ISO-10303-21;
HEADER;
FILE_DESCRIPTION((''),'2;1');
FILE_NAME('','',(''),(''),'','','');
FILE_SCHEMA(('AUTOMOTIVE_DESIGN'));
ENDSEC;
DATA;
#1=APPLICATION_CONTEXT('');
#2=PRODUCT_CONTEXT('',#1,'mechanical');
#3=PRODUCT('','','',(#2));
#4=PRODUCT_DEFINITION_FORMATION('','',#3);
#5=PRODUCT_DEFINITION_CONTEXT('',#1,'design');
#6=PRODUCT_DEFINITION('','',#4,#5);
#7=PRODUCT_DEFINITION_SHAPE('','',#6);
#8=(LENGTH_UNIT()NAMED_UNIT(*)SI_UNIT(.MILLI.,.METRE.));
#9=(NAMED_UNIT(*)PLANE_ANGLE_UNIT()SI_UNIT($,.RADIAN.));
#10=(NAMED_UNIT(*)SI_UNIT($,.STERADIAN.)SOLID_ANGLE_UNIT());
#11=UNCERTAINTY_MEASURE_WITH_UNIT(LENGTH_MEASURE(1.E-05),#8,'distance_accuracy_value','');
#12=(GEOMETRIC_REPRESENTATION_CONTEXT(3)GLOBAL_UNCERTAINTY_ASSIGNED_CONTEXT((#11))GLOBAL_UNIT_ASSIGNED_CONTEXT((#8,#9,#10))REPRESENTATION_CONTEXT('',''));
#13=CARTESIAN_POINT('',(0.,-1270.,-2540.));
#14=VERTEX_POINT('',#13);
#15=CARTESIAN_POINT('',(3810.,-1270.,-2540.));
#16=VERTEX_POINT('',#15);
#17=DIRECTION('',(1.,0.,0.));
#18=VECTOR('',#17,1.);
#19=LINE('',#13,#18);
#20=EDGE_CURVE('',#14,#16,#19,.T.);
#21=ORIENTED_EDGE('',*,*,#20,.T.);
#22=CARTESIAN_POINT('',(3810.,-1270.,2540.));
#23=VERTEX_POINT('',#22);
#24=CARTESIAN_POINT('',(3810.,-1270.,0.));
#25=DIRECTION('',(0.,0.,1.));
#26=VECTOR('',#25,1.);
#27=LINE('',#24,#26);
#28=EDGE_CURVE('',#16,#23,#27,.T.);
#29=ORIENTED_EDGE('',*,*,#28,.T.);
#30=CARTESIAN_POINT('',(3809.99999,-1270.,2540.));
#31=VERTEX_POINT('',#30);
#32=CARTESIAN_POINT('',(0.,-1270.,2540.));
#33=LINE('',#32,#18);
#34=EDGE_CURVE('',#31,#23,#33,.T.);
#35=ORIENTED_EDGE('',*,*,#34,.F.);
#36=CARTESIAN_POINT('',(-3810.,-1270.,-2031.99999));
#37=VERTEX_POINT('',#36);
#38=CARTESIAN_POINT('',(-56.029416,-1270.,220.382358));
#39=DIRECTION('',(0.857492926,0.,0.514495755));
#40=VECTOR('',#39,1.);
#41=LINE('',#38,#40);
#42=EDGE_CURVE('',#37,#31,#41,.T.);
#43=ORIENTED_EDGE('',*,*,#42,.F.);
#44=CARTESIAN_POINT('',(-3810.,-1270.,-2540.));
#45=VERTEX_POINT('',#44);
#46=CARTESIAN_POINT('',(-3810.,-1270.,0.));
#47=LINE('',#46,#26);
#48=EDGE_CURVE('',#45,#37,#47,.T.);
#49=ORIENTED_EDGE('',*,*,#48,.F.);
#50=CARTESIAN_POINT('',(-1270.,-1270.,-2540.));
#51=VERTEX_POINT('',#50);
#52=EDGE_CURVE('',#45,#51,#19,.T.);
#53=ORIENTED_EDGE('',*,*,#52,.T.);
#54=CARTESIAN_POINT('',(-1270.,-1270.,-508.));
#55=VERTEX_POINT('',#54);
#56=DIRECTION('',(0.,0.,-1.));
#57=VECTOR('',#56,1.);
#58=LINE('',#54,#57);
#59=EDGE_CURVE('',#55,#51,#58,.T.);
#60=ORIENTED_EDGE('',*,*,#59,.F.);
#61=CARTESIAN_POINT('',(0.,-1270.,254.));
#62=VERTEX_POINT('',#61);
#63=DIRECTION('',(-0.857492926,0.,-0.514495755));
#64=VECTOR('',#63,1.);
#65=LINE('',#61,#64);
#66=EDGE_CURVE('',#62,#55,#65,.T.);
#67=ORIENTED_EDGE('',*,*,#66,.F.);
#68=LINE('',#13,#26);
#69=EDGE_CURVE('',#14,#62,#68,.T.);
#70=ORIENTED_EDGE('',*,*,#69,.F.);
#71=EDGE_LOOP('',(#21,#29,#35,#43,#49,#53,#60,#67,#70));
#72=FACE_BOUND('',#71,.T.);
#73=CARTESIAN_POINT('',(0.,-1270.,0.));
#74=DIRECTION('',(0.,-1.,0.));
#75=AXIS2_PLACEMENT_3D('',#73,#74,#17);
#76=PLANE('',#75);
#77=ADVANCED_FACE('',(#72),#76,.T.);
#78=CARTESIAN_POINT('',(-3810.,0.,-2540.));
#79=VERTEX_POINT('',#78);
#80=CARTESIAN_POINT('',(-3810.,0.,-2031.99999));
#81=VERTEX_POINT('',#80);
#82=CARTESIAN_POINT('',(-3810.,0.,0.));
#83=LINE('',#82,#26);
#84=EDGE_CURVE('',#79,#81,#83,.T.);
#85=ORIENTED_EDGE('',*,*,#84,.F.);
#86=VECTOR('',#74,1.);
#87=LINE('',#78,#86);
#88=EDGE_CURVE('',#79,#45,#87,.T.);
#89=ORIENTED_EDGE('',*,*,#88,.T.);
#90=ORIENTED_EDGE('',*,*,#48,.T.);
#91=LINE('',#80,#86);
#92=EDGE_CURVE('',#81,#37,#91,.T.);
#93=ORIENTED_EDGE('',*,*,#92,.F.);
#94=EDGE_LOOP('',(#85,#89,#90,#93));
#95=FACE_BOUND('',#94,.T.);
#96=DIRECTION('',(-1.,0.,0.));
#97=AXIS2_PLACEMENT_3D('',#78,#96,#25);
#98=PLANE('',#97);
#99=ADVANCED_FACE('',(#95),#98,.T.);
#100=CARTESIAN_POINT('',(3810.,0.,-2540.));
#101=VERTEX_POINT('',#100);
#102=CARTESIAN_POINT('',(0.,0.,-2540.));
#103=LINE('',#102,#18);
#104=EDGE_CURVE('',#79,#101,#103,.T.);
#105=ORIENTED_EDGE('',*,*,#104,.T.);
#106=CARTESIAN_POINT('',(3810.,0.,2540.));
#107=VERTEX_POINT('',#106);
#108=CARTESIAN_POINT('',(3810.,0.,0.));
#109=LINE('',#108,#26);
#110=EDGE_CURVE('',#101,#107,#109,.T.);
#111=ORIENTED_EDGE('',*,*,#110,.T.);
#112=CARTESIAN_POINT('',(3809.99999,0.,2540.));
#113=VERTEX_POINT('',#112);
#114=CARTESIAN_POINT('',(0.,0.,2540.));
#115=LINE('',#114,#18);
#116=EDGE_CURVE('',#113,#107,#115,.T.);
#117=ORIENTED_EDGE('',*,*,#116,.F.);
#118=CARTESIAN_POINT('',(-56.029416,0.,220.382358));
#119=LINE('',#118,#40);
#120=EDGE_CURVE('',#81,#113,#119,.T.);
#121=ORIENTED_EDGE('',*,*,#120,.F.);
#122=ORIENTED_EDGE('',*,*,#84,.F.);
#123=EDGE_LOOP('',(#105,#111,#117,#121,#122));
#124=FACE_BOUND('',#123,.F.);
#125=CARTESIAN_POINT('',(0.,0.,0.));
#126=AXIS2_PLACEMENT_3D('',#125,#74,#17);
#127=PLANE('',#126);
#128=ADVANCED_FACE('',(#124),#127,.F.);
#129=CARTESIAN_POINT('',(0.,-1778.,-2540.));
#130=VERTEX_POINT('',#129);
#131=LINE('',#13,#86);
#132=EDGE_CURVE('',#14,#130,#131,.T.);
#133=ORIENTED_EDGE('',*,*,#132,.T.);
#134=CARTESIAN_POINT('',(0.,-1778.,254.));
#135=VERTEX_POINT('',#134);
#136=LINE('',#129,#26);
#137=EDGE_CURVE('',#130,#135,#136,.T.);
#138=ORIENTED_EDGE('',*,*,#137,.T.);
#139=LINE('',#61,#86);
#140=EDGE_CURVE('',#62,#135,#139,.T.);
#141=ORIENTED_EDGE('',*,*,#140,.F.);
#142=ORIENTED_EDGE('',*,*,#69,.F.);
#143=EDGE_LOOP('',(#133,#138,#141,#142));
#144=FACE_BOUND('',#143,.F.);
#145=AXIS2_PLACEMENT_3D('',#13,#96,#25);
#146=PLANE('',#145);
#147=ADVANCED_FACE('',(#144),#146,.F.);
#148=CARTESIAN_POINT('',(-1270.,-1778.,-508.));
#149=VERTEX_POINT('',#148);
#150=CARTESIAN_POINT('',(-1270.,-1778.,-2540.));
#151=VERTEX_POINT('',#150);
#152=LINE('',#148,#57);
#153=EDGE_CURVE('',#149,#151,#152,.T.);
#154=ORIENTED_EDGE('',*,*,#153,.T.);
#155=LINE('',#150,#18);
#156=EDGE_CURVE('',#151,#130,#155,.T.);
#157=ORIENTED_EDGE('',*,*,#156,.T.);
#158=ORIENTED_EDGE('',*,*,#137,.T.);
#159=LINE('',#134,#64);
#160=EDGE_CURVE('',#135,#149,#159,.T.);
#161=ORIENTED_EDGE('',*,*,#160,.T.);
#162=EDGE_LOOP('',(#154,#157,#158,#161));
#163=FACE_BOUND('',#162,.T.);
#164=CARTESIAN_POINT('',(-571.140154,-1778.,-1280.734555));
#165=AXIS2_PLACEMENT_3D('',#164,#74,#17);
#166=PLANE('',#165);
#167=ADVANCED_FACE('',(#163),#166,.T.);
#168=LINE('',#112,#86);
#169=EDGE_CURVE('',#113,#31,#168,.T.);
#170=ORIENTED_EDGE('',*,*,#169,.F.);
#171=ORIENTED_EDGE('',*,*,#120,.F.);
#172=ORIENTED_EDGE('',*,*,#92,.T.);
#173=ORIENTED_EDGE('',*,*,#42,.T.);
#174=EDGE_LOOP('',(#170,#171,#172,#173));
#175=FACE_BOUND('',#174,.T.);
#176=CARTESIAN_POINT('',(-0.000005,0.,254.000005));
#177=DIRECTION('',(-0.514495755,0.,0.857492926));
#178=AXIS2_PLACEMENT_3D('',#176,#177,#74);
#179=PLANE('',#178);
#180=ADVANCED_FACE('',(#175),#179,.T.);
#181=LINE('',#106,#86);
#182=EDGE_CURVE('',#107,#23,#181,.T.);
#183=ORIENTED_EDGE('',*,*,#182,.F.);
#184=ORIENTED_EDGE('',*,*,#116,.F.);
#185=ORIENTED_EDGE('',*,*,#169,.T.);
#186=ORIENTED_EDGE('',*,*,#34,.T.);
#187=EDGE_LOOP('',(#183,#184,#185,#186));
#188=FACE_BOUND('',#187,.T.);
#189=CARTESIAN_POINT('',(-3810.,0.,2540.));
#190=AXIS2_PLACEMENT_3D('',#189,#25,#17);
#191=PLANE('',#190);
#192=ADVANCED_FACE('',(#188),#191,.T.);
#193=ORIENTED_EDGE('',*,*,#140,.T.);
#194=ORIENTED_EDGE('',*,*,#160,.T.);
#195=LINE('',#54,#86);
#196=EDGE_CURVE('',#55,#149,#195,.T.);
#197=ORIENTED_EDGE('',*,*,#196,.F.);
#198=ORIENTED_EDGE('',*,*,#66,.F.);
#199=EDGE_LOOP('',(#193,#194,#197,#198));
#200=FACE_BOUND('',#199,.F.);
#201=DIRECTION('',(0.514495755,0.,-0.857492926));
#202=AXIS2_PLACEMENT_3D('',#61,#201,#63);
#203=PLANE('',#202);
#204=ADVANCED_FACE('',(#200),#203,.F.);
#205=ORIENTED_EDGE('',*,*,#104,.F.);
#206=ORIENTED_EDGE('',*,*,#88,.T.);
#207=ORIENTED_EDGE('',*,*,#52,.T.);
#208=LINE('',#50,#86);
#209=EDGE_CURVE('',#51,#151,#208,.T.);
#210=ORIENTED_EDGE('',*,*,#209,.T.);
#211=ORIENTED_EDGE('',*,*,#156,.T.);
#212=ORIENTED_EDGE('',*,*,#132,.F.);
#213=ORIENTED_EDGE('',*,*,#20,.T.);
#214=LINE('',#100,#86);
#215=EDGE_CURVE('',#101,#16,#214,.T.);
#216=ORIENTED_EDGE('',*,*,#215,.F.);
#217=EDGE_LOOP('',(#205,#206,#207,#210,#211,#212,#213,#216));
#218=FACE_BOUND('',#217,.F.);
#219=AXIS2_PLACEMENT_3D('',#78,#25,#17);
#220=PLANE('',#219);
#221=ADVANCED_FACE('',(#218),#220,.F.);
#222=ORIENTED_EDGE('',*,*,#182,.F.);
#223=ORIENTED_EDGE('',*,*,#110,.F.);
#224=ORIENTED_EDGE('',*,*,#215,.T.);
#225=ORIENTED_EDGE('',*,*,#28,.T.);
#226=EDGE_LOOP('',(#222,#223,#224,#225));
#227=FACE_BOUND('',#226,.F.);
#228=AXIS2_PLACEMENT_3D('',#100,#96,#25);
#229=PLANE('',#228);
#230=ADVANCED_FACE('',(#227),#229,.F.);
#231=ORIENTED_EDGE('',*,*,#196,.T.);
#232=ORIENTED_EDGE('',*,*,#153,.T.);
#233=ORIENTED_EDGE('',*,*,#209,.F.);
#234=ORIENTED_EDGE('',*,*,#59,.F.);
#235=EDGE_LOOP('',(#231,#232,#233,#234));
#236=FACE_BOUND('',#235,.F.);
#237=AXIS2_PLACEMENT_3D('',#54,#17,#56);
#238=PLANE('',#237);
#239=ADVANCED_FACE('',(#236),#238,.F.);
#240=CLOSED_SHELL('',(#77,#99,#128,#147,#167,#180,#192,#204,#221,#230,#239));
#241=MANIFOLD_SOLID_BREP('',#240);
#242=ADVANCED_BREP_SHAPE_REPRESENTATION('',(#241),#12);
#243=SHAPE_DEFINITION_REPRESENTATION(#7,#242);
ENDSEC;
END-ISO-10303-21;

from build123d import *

# Parameters (mm, degrees)
F0_W     = 7620
F0_H     = 5080
F1_DEPTH = 1270
F2_SIZE2 = 7619.99999
F2_SIZE  = 4571.99999
F4_DEPTH = 508


# Not quite as in the source:
# - a fillet or chamfer is up to 0.001 mm smaller than in the source, because OpenCascade refuses the exact size
# - ends of sketch curves that miss each other by under 0.0002 mm in the source are joined


with BuildPart() as f1:
    # F0 (on Front) → F1 (new body)
    with BuildSketch(Plane.XZ):
        Rectangle(F0_W, F0_H)
    extrude(amount=F1_DEPTH)

    # F2 (size 4572 and 7620 in the source; OpenCascade refuses exactly that, so slightly less here)
    f2_edges = [f1.edges().sort_by_distance(p)[0] for p in [
        (-3810, -635, 2540),
    ]]
    f2_side = f1.faces().sort_by_distance((-3810, -635, 0))[0]
    chamfer(f2_edges, length=F2_SIZE, length2=F2_SIZE2, reference=f2_side)

    # F3 (on face) → F4 (join)
    with BuildSketch(Plane.XZ.offset(1270)):
        Polygon((-1270, -508), (-1270, -2540), (0, -2540), (0, 254), align=None)
    extrude(amount=F4_DEPTH)


solid = f1.part
